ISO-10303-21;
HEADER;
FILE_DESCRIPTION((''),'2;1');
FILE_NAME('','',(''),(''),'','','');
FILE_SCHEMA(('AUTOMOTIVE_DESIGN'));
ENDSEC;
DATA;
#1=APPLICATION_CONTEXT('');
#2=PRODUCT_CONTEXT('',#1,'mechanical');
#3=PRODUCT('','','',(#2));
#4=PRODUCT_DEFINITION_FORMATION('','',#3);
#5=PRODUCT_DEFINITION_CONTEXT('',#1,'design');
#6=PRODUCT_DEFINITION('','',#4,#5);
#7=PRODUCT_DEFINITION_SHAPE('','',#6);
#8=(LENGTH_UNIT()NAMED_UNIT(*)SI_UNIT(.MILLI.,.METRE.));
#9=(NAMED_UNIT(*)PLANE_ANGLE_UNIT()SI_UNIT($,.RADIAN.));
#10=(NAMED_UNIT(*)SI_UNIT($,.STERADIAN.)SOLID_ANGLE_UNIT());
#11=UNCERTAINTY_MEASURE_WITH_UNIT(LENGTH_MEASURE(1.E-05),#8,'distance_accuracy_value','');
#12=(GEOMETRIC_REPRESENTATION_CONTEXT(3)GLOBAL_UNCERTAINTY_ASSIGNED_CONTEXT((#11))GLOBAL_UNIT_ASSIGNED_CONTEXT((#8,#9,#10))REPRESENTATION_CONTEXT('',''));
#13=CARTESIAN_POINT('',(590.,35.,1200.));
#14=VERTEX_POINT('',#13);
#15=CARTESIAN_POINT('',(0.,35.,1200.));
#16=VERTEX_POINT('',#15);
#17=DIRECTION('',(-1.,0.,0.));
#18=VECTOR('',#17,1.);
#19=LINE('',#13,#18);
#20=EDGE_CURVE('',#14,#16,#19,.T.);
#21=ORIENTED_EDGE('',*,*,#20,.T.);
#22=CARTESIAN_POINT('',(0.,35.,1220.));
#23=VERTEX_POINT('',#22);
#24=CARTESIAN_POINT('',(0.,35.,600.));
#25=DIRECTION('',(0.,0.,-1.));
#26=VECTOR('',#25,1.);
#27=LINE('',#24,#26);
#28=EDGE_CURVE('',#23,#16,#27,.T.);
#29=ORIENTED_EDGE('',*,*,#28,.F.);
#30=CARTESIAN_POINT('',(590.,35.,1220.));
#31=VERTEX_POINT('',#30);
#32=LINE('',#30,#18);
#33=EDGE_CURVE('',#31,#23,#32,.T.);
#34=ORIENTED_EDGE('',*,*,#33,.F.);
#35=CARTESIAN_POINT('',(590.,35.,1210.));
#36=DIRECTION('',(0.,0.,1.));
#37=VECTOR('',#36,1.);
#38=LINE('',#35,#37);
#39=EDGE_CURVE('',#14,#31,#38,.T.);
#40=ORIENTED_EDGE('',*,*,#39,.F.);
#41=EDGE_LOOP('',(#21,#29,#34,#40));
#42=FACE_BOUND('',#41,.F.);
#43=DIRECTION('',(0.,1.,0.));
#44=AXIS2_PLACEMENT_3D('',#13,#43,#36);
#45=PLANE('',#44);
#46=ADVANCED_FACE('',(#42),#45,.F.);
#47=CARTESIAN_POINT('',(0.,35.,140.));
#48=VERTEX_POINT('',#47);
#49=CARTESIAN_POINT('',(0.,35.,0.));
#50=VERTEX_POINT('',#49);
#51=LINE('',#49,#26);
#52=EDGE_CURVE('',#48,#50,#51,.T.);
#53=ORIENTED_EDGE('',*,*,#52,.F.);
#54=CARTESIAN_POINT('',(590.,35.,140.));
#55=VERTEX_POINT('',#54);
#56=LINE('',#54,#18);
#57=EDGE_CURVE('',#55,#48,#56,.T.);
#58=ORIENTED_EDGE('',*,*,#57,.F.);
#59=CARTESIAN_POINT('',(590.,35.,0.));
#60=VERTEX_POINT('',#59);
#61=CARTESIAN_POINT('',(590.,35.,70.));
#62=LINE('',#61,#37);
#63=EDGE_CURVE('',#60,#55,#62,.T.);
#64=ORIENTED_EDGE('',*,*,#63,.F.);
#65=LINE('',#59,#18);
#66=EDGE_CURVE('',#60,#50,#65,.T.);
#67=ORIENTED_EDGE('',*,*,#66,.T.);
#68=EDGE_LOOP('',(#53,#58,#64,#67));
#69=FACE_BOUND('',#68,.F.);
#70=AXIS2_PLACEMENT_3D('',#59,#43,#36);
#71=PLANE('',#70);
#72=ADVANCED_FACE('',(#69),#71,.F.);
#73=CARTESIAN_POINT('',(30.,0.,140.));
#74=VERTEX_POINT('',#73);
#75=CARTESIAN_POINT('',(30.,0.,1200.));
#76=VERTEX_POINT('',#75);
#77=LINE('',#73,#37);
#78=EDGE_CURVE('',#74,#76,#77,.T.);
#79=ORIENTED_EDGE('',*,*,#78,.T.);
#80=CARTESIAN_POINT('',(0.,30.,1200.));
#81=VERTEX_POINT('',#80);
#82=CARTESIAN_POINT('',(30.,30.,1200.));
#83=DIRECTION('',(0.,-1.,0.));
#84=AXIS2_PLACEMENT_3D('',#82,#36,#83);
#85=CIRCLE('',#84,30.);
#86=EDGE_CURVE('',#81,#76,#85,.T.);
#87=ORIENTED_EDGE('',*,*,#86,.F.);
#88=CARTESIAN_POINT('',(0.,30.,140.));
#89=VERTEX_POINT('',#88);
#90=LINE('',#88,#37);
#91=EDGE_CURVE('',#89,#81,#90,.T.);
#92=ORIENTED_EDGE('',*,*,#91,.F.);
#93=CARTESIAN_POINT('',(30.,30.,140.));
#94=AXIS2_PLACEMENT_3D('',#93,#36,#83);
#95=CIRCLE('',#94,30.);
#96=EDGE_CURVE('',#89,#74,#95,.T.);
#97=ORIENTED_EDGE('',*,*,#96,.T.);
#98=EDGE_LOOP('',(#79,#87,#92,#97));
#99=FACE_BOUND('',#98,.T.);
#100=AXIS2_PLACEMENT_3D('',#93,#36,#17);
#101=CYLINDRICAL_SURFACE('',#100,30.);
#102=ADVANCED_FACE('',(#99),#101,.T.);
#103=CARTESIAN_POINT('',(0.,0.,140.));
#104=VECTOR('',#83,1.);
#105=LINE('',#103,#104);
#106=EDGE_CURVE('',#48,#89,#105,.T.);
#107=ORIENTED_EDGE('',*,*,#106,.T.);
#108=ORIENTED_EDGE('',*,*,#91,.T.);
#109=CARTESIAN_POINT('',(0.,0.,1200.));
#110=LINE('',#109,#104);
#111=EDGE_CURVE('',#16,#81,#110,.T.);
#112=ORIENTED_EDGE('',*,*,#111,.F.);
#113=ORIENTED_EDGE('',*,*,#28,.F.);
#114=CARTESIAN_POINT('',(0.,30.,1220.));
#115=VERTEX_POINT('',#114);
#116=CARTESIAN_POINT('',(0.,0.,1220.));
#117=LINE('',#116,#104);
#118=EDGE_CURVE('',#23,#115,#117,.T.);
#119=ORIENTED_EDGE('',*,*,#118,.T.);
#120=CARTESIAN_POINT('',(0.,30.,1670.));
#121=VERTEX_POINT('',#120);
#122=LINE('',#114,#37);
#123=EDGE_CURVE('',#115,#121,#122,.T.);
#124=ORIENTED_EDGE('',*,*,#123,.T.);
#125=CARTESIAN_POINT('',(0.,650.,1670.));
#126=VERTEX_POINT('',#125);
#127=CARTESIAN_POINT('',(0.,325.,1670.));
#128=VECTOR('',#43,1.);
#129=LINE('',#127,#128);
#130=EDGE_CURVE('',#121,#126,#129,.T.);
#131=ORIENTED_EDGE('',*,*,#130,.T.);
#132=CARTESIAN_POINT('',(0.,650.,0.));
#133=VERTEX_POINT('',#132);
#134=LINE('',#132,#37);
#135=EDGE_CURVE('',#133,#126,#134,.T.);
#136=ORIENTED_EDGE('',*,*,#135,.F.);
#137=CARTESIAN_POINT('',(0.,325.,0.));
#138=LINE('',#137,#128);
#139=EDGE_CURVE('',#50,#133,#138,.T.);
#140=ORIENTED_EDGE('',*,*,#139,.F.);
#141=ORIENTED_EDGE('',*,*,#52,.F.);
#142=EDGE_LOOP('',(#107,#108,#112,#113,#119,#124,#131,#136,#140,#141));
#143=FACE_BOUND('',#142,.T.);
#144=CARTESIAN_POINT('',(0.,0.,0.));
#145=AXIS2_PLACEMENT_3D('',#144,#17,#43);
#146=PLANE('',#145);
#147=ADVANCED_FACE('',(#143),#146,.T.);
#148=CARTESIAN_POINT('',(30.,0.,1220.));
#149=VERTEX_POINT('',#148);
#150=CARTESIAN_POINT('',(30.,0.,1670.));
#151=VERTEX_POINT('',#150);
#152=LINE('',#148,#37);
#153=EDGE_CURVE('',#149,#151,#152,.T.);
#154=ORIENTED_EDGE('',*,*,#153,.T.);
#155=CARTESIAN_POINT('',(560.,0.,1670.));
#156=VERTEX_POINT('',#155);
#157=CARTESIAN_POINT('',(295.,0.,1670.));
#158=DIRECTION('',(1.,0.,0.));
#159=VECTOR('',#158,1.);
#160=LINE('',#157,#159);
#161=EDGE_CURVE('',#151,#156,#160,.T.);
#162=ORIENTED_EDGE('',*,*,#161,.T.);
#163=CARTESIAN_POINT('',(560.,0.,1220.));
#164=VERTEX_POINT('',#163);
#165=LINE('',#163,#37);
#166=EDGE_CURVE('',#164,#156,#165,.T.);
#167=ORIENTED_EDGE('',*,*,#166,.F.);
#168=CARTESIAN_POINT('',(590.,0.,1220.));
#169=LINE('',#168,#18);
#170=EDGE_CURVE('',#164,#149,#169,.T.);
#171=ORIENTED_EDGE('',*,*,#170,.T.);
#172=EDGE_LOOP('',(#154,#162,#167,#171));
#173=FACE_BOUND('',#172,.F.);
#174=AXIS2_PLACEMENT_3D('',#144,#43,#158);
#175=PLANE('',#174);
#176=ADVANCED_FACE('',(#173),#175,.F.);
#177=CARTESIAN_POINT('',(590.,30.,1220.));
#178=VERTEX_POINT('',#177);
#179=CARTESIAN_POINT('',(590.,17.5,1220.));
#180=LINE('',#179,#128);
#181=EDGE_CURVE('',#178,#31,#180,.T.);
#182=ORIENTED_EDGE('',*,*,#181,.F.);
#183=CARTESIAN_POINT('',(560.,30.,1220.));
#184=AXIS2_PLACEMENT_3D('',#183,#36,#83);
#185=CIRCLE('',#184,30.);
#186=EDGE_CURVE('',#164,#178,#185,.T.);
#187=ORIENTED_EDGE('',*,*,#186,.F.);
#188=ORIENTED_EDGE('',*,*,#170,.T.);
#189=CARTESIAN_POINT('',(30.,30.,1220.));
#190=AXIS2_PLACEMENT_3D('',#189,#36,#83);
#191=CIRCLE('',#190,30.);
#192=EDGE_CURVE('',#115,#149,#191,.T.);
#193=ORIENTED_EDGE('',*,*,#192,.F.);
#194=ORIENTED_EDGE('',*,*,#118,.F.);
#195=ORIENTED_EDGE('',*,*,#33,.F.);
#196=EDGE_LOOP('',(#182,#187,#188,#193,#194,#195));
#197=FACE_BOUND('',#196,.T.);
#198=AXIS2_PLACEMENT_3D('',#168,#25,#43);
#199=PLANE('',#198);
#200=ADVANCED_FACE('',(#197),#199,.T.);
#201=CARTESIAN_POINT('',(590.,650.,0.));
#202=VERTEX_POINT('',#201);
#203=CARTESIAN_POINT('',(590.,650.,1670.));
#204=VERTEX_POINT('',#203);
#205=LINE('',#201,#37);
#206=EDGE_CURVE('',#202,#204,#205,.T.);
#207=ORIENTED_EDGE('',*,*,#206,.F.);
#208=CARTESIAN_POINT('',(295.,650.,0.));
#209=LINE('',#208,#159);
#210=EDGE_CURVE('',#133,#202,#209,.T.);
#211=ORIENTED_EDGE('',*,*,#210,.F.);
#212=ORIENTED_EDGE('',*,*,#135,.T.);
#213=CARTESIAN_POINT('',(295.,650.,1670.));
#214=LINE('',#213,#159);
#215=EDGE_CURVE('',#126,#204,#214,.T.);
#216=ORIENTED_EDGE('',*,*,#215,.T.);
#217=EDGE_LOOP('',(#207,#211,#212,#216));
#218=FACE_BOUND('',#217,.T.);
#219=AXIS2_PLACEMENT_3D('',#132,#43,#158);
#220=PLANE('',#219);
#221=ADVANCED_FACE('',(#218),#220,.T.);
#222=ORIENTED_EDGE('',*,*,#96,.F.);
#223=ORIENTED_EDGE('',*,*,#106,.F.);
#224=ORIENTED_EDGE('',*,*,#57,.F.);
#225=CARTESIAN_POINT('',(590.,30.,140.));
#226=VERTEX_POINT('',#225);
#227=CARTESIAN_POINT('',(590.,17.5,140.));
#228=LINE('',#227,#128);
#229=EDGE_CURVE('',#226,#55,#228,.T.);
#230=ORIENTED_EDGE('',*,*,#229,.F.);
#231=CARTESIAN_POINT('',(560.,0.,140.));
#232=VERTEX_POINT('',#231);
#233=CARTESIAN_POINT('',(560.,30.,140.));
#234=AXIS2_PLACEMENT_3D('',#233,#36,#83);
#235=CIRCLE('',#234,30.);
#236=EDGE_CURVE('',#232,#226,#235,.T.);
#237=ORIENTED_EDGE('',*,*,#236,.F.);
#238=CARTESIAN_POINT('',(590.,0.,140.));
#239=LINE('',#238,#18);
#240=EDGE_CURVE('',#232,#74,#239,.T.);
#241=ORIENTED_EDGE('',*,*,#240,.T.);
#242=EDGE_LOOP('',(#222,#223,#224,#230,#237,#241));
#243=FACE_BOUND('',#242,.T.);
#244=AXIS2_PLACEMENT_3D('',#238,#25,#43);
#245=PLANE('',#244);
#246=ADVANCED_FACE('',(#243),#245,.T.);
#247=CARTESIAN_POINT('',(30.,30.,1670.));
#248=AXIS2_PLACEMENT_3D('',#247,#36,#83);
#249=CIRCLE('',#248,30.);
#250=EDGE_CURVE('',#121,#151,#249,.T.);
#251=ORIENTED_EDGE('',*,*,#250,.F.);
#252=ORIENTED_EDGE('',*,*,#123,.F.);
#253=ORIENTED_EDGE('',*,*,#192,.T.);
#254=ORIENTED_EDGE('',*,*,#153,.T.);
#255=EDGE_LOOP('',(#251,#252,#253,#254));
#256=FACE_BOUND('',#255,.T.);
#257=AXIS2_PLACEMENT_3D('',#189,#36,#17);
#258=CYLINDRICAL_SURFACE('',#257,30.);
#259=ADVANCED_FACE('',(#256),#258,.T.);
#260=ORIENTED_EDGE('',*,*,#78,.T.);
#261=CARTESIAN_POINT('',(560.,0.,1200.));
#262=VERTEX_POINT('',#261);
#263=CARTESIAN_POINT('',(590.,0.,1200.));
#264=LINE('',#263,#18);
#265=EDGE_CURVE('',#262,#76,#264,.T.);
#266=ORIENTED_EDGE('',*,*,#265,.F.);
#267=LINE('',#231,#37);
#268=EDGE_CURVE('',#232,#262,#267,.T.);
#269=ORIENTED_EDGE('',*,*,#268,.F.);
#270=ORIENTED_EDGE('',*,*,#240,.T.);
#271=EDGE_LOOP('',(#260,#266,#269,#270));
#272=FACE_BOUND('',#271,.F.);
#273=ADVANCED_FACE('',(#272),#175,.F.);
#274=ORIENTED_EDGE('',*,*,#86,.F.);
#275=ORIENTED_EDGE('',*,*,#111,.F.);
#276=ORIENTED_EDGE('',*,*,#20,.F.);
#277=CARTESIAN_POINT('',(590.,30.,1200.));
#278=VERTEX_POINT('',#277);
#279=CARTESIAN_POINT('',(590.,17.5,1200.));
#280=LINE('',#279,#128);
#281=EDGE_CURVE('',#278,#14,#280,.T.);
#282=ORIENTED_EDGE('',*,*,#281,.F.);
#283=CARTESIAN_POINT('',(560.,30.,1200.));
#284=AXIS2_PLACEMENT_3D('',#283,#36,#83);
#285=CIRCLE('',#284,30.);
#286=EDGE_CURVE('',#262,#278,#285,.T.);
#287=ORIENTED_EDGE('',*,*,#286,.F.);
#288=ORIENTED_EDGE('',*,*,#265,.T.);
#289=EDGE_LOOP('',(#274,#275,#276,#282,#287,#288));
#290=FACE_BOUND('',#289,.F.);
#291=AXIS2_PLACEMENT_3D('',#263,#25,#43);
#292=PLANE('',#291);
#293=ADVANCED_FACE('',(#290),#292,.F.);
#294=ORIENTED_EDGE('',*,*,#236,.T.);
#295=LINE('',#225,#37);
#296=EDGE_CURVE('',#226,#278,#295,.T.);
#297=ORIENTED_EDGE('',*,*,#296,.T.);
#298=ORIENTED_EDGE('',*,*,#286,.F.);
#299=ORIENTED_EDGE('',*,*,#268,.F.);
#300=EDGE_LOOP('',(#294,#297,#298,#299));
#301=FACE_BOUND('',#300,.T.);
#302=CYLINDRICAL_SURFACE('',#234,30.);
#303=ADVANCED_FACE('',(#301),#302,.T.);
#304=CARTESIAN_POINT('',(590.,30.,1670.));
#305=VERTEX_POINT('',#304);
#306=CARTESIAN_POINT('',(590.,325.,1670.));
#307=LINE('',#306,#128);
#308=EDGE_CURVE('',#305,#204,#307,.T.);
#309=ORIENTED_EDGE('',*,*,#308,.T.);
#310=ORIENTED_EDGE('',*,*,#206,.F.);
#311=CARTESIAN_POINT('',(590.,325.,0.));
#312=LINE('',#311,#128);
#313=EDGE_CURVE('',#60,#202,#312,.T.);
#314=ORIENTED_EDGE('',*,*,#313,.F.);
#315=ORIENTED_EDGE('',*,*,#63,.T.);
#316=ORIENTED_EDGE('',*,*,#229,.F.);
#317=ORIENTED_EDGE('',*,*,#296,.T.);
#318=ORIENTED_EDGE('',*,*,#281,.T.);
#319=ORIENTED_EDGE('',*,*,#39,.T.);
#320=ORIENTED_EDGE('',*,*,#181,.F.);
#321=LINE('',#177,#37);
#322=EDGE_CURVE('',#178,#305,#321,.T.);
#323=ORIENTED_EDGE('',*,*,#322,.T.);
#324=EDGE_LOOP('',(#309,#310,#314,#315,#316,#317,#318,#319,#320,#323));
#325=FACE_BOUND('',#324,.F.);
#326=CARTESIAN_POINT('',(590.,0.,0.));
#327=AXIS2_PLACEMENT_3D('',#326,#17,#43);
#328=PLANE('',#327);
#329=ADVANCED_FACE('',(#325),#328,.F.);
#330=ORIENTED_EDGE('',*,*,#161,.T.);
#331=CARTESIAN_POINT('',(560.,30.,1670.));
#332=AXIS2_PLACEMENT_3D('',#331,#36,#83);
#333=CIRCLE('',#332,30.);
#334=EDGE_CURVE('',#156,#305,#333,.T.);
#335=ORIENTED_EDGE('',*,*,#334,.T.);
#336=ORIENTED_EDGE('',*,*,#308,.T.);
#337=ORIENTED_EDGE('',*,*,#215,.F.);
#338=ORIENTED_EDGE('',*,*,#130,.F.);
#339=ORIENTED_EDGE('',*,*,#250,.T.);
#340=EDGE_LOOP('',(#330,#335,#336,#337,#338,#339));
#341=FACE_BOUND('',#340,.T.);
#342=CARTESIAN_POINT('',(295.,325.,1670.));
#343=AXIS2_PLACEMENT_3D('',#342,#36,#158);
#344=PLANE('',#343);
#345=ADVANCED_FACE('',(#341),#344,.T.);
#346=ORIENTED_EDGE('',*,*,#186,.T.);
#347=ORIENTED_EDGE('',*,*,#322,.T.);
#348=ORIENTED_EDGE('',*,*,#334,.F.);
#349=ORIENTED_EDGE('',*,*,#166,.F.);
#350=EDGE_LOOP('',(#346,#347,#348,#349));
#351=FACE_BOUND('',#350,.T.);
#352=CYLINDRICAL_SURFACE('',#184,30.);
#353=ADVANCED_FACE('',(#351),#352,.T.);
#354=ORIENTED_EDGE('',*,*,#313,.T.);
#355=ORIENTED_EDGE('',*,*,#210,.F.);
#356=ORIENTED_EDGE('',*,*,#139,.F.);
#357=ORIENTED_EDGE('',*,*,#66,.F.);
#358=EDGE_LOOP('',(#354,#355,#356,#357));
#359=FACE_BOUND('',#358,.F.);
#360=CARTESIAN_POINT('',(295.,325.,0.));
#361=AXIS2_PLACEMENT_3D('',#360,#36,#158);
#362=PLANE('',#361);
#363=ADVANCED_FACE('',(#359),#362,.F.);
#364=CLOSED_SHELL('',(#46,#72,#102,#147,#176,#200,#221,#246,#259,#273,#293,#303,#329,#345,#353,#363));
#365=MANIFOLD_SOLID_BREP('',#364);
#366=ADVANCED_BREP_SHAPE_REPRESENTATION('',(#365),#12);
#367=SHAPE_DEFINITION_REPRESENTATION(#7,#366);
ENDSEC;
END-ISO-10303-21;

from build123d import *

# Parameters (mm, degrees)
F1_W     = 590
F1_H     = 650
F2_DEPTH = 1670
F3_W     = 35
F3_H     = 140
F3_H_2   = 20
F4_DEPTH = 590.001
F5_R     = 30


with BuildPart() as f2:
    # F1 (on Top) → F2 (new body)
    with BuildSketch(Plane.XY):
        with Locations((295, 325)):
            Rectangle(F1_W, F1_H)
    extrude(amount=F2_DEPTH)

    # F3 (on face) → F4 (cut, through all)
    with BuildSketch(Plane.YZ.offset(590)):
        with Locations((17.5, 70)):
            Rectangle(F3_W, F3_H)
        with Locations((17.5, 1210)):
            Rectangle(F3_W, F3_H_2)
    extrude(amount=-F4_DEPTH, mode=Mode.SUBTRACT)

    # F5
    f5_edges = [f2.edges().sort_by_distance(p)[0] for p in [
        (0, 0, 1445),
        (0, 0, 670),
        (590, 0, 670),
        (590, 0, 1445),
    ]]
    fillet(f5_edges, radius=F5_R)


solid = f2.part
